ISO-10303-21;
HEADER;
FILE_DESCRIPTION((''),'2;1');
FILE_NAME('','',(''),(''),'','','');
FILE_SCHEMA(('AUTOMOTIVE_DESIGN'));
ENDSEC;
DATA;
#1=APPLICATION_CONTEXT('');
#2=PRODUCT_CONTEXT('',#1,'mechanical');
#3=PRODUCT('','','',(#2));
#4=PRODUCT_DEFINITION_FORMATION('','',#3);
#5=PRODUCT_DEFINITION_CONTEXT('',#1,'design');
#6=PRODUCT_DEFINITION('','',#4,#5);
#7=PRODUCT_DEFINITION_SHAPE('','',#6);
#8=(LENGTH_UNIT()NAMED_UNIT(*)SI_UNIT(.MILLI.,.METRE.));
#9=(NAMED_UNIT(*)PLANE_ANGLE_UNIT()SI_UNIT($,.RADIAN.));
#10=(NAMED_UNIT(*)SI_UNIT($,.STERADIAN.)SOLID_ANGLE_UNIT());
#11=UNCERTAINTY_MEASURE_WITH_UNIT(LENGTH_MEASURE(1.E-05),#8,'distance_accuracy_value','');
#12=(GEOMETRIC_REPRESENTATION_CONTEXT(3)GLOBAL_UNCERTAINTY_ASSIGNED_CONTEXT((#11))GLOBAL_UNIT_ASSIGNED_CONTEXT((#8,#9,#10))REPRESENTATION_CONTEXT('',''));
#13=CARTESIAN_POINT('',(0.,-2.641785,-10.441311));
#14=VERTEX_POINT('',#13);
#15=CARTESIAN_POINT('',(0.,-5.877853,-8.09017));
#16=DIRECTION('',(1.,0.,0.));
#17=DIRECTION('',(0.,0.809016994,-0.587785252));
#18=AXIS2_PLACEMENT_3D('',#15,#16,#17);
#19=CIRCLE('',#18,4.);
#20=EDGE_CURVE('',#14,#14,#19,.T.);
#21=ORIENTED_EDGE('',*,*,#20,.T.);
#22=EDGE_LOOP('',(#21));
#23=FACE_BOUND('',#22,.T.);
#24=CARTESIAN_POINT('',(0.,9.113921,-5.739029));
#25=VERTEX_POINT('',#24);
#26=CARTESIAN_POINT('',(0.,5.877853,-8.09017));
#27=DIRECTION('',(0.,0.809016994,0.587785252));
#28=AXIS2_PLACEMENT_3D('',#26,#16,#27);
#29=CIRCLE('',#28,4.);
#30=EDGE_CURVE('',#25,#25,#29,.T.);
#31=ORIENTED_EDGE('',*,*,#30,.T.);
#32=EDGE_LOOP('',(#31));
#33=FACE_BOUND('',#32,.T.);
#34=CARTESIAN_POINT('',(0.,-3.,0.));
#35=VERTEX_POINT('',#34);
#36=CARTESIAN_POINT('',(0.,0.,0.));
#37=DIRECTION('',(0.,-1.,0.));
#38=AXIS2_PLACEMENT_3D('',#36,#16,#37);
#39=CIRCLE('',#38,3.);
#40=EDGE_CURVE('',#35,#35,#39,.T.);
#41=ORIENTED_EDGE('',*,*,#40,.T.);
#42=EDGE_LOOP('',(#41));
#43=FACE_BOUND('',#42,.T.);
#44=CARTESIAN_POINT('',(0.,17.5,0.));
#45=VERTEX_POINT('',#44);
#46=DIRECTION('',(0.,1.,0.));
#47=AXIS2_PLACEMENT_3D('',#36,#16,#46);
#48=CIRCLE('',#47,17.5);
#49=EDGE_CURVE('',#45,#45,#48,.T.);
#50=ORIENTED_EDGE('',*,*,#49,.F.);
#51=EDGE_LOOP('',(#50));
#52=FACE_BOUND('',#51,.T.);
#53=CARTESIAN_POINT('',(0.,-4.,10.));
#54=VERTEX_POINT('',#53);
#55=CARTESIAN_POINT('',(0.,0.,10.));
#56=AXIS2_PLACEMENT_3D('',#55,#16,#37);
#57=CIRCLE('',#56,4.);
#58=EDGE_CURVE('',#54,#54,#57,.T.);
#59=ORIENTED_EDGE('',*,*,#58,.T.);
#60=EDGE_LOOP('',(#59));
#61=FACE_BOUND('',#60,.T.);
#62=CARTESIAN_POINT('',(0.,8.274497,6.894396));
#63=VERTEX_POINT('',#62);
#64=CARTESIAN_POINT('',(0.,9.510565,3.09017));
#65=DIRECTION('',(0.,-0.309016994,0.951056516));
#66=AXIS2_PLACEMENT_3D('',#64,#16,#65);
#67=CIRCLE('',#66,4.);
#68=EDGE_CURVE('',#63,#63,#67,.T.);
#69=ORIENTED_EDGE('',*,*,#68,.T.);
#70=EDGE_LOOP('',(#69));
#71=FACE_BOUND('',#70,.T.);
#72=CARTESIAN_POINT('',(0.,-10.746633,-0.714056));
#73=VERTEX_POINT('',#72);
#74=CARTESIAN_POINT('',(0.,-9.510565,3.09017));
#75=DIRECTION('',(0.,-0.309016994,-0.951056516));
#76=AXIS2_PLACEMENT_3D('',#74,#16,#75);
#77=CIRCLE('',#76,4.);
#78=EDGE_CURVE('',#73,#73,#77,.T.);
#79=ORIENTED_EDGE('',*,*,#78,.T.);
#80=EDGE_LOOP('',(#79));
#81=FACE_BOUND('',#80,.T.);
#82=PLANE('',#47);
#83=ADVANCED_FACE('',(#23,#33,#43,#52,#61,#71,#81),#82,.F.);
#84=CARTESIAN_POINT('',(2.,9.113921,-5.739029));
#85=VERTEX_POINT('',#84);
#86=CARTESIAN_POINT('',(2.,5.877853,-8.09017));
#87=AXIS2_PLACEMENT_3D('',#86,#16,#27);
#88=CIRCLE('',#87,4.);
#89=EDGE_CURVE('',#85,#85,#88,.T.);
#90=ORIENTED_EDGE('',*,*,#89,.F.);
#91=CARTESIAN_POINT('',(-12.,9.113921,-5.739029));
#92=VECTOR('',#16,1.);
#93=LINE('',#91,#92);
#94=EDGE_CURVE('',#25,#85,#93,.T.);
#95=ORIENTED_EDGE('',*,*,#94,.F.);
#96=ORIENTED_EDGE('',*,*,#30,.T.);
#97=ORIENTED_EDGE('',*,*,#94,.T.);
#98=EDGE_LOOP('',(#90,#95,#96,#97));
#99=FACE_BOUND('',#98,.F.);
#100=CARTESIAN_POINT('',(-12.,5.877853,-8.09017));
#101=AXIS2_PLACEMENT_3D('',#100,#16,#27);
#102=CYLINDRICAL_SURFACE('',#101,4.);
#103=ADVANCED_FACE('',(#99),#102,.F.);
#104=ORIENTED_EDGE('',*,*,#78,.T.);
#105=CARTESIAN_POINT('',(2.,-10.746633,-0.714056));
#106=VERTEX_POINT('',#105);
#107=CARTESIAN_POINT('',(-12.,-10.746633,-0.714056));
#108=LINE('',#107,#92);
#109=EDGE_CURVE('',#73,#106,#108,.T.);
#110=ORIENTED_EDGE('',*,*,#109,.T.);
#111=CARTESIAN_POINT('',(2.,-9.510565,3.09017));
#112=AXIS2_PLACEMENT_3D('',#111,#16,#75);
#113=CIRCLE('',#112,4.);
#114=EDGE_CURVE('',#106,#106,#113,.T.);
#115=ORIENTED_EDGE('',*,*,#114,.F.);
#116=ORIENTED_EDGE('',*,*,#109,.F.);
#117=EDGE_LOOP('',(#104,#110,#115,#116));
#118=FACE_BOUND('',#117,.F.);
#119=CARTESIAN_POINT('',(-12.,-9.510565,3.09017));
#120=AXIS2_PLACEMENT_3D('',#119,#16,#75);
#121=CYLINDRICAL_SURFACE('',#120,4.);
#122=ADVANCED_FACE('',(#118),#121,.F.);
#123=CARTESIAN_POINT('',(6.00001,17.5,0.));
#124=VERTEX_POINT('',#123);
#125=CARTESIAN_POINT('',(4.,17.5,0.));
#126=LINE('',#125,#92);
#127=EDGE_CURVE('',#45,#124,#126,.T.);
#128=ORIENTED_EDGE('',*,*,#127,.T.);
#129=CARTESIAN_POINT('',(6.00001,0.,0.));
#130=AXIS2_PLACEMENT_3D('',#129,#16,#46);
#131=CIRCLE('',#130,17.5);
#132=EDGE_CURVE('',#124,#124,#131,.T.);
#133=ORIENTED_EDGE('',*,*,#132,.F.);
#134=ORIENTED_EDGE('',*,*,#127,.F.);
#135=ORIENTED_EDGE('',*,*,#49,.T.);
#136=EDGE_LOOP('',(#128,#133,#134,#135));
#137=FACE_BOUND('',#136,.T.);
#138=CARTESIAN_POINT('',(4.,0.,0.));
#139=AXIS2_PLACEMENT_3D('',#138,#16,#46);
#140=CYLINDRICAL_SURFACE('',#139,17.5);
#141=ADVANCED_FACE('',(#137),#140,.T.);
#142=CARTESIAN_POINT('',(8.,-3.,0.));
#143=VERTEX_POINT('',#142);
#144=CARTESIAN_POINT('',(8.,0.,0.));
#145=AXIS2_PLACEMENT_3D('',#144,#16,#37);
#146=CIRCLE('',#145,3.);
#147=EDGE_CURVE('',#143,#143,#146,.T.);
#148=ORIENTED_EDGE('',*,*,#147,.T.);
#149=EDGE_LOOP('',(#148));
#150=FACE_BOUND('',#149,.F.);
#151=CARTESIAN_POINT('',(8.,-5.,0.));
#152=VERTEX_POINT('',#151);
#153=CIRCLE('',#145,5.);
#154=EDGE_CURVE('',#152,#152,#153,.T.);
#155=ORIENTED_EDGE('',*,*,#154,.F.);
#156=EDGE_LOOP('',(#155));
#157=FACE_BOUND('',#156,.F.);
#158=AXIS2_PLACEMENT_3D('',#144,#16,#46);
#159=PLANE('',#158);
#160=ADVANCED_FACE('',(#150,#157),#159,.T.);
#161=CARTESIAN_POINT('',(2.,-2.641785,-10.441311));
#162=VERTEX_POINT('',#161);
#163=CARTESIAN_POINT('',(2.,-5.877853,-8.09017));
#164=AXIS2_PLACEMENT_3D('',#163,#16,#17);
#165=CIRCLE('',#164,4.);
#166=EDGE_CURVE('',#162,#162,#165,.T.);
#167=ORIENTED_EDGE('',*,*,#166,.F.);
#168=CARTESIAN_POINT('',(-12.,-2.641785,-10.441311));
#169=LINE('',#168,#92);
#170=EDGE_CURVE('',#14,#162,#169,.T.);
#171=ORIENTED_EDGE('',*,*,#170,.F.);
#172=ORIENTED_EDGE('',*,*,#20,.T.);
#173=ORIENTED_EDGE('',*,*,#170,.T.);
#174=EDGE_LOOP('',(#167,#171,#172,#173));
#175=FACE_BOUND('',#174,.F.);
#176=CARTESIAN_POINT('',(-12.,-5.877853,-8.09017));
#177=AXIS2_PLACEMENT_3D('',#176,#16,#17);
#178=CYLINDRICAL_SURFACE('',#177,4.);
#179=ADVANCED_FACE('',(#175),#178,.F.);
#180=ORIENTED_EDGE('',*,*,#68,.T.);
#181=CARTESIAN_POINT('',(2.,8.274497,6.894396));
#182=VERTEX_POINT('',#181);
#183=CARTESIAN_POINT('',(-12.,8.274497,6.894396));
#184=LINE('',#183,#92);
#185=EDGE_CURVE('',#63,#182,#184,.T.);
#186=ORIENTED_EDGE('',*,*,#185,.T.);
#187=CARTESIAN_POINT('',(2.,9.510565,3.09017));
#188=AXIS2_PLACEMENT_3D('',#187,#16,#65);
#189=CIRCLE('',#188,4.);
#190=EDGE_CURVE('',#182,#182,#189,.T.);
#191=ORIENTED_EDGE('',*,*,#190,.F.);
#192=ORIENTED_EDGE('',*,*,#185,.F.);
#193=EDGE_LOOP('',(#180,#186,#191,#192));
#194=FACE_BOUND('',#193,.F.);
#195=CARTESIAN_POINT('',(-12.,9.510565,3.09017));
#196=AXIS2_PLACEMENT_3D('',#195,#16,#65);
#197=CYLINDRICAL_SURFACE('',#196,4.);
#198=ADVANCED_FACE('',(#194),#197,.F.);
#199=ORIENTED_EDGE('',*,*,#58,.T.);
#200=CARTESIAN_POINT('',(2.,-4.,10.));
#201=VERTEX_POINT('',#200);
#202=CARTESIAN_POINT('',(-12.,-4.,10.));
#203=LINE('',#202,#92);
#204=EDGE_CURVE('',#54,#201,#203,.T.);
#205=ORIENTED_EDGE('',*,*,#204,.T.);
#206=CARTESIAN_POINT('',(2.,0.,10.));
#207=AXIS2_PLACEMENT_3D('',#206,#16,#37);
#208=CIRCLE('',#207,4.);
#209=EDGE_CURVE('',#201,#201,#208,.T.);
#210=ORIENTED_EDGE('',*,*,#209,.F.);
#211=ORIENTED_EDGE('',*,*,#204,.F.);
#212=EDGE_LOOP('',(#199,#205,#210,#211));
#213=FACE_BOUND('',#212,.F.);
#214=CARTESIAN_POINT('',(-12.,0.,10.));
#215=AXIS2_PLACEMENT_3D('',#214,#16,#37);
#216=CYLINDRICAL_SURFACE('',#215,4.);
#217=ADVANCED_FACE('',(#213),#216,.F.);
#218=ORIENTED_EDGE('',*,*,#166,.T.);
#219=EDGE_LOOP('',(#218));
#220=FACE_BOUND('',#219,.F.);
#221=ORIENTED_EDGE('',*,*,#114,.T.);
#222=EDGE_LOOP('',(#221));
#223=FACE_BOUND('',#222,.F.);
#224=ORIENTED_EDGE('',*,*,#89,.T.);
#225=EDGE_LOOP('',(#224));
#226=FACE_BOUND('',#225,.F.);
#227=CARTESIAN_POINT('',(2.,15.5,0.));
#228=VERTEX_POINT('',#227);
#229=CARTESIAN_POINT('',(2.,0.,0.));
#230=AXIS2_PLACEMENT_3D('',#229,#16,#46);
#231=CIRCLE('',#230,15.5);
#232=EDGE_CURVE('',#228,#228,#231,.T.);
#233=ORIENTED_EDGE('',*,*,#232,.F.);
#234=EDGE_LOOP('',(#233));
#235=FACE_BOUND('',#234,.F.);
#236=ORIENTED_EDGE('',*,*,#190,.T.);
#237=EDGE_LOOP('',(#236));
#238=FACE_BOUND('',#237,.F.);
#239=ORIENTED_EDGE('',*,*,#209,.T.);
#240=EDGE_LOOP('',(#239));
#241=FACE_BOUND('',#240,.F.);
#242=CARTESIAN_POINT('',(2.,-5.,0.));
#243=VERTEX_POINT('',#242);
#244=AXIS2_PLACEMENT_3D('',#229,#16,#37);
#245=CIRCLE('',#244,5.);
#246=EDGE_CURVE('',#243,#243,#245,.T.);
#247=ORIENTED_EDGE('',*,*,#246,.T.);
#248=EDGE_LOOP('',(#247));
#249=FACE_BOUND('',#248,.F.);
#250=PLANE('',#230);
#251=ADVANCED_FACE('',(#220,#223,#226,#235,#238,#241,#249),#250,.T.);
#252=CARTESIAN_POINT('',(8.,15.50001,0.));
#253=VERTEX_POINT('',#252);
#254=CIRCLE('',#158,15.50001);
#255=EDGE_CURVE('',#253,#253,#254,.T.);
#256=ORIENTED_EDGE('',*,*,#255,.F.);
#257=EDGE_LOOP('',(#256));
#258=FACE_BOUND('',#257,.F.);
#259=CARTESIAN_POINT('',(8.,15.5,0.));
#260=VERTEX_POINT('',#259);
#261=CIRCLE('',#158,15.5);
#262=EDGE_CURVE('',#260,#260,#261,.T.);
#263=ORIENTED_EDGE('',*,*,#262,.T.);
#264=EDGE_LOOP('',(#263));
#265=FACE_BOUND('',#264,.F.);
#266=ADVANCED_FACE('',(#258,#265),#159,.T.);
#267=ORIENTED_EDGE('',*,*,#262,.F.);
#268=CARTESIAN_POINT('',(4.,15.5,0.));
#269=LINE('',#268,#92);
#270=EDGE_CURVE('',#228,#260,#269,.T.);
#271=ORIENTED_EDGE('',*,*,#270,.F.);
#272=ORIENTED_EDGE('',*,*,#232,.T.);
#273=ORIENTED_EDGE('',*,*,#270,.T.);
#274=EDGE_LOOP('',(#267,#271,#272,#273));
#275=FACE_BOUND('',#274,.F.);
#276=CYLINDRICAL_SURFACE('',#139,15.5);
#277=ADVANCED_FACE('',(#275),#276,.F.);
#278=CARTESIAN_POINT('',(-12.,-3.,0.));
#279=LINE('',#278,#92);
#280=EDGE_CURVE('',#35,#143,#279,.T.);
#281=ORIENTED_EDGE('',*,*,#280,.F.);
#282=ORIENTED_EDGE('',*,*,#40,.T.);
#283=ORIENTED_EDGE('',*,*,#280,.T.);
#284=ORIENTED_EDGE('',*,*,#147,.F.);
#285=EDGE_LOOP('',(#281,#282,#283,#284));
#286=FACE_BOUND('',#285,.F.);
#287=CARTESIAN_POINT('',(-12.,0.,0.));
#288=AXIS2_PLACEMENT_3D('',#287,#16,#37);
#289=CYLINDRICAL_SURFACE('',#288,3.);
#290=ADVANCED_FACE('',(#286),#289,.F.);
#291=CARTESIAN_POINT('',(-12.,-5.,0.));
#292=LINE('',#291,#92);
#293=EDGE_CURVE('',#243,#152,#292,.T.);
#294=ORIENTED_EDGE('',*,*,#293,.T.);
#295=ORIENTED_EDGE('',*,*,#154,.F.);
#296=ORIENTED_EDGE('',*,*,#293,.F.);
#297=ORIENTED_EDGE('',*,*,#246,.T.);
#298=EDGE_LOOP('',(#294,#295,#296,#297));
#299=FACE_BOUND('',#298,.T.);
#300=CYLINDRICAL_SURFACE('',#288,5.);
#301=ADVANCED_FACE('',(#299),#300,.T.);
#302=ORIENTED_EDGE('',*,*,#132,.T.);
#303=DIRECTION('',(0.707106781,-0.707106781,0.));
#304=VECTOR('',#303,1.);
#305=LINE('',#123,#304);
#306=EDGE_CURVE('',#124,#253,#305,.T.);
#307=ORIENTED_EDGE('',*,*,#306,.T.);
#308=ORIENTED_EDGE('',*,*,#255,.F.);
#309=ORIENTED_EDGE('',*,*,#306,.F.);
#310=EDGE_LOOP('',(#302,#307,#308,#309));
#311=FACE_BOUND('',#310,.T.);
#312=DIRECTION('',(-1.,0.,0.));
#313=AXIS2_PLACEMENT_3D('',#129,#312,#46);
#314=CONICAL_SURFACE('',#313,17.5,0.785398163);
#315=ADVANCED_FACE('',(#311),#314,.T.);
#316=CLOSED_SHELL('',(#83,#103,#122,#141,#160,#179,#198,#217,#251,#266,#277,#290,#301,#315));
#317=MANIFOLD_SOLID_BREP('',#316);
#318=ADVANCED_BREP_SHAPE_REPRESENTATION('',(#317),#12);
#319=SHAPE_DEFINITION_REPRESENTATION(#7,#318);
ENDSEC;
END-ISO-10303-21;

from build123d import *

# Parameters (mm, degrees)
F0_W            = 8
F0_H            = 17.5
F3_D            = 6
F3_DEPTH        = 12
F3_TIP          = 1.8025818571
F4_T            = -2
F6_D            = 8
F6_DEPTH        = 12
F6_TIP          = 2.4034424761
F6_COPIES_COUNT = 5
F7_SIZE         = 1.99999


# Not quite as in the source:
# - a fillet or chamfer is up to 0.001 mm smaller than in the source, because OpenCascade refuses the exact size
# - a pattern or mirror of a feature is missing from the dataset's text; its kind, count and spacing are read off the source's solid


with BuildPart() as f1:
    # F0 (on Top) → F1 (revolve)
    with BuildSketch(Plane.XY):
        with Locations((4, 8.75)):
            Rectangle(F0_W, F0_H)
    revolve(axis=Axis((4, 0, 0), (1, 0, 0)))

    # F3
    with Locations(Plane(origin=(0, 0, 0), x_dir=(0, 1, 0), z_dir=(-1, 0, 0))):
        with Locations((0, 0)):
            Hole(F3_D / 2, depth=F3_DEPTH)
            with Locations((0, 0, -(F3_DEPTH + F3_TIP / 2))):  # 118° drill point
                Cone(0, F3_D / 2, F3_TIP, mode=Mode.SUBTRACT)

    # F4
    f4_openings = [f1.faces().sort_by_distance(p)[0] for p in [
        (8, -17.005025, 0),
    ]]
    offset(amount=F4_T, openings=f4_openings)

    # F6
    with Locations(Plane(origin=(0, 0, 0), x_dir=(0, 1, 0), z_dir=(-1, 0, 0))):
        with Locations((0, -10)):
            f6 = Hole(F6_D / 2, depth=F6_DEPTH)
            with Locations((0, 0, -(F6_DEPTH + F6_TIP / 2))):  # 118° drill point
                Cone(0, F6_D / 2, F6_TIP, mode=Mode.SUBTRACT)

    # F6_copies: F6 ×5 about axis
    f6_copies_axis = Axis((0, 0, 0), (1, 0, 0))
    for i in range(1, F6_COPIES_COUNT):
        add(f6.rotate(f6_copies_axis, i * 360 / F6_COPIES_COUNT), mode=Mode.SUBTRACT)

    # F7 (size 2 in the source; OpenCascade refuses exactly that, so slightly less here)
    f7_edges = [f1.edges().sort_by_distance(p)[0] for p in [
        (8, -17.5, 0),
    ]]
    chamfer(f7_edges, length=F7_SIZE)


solid = f1.part
